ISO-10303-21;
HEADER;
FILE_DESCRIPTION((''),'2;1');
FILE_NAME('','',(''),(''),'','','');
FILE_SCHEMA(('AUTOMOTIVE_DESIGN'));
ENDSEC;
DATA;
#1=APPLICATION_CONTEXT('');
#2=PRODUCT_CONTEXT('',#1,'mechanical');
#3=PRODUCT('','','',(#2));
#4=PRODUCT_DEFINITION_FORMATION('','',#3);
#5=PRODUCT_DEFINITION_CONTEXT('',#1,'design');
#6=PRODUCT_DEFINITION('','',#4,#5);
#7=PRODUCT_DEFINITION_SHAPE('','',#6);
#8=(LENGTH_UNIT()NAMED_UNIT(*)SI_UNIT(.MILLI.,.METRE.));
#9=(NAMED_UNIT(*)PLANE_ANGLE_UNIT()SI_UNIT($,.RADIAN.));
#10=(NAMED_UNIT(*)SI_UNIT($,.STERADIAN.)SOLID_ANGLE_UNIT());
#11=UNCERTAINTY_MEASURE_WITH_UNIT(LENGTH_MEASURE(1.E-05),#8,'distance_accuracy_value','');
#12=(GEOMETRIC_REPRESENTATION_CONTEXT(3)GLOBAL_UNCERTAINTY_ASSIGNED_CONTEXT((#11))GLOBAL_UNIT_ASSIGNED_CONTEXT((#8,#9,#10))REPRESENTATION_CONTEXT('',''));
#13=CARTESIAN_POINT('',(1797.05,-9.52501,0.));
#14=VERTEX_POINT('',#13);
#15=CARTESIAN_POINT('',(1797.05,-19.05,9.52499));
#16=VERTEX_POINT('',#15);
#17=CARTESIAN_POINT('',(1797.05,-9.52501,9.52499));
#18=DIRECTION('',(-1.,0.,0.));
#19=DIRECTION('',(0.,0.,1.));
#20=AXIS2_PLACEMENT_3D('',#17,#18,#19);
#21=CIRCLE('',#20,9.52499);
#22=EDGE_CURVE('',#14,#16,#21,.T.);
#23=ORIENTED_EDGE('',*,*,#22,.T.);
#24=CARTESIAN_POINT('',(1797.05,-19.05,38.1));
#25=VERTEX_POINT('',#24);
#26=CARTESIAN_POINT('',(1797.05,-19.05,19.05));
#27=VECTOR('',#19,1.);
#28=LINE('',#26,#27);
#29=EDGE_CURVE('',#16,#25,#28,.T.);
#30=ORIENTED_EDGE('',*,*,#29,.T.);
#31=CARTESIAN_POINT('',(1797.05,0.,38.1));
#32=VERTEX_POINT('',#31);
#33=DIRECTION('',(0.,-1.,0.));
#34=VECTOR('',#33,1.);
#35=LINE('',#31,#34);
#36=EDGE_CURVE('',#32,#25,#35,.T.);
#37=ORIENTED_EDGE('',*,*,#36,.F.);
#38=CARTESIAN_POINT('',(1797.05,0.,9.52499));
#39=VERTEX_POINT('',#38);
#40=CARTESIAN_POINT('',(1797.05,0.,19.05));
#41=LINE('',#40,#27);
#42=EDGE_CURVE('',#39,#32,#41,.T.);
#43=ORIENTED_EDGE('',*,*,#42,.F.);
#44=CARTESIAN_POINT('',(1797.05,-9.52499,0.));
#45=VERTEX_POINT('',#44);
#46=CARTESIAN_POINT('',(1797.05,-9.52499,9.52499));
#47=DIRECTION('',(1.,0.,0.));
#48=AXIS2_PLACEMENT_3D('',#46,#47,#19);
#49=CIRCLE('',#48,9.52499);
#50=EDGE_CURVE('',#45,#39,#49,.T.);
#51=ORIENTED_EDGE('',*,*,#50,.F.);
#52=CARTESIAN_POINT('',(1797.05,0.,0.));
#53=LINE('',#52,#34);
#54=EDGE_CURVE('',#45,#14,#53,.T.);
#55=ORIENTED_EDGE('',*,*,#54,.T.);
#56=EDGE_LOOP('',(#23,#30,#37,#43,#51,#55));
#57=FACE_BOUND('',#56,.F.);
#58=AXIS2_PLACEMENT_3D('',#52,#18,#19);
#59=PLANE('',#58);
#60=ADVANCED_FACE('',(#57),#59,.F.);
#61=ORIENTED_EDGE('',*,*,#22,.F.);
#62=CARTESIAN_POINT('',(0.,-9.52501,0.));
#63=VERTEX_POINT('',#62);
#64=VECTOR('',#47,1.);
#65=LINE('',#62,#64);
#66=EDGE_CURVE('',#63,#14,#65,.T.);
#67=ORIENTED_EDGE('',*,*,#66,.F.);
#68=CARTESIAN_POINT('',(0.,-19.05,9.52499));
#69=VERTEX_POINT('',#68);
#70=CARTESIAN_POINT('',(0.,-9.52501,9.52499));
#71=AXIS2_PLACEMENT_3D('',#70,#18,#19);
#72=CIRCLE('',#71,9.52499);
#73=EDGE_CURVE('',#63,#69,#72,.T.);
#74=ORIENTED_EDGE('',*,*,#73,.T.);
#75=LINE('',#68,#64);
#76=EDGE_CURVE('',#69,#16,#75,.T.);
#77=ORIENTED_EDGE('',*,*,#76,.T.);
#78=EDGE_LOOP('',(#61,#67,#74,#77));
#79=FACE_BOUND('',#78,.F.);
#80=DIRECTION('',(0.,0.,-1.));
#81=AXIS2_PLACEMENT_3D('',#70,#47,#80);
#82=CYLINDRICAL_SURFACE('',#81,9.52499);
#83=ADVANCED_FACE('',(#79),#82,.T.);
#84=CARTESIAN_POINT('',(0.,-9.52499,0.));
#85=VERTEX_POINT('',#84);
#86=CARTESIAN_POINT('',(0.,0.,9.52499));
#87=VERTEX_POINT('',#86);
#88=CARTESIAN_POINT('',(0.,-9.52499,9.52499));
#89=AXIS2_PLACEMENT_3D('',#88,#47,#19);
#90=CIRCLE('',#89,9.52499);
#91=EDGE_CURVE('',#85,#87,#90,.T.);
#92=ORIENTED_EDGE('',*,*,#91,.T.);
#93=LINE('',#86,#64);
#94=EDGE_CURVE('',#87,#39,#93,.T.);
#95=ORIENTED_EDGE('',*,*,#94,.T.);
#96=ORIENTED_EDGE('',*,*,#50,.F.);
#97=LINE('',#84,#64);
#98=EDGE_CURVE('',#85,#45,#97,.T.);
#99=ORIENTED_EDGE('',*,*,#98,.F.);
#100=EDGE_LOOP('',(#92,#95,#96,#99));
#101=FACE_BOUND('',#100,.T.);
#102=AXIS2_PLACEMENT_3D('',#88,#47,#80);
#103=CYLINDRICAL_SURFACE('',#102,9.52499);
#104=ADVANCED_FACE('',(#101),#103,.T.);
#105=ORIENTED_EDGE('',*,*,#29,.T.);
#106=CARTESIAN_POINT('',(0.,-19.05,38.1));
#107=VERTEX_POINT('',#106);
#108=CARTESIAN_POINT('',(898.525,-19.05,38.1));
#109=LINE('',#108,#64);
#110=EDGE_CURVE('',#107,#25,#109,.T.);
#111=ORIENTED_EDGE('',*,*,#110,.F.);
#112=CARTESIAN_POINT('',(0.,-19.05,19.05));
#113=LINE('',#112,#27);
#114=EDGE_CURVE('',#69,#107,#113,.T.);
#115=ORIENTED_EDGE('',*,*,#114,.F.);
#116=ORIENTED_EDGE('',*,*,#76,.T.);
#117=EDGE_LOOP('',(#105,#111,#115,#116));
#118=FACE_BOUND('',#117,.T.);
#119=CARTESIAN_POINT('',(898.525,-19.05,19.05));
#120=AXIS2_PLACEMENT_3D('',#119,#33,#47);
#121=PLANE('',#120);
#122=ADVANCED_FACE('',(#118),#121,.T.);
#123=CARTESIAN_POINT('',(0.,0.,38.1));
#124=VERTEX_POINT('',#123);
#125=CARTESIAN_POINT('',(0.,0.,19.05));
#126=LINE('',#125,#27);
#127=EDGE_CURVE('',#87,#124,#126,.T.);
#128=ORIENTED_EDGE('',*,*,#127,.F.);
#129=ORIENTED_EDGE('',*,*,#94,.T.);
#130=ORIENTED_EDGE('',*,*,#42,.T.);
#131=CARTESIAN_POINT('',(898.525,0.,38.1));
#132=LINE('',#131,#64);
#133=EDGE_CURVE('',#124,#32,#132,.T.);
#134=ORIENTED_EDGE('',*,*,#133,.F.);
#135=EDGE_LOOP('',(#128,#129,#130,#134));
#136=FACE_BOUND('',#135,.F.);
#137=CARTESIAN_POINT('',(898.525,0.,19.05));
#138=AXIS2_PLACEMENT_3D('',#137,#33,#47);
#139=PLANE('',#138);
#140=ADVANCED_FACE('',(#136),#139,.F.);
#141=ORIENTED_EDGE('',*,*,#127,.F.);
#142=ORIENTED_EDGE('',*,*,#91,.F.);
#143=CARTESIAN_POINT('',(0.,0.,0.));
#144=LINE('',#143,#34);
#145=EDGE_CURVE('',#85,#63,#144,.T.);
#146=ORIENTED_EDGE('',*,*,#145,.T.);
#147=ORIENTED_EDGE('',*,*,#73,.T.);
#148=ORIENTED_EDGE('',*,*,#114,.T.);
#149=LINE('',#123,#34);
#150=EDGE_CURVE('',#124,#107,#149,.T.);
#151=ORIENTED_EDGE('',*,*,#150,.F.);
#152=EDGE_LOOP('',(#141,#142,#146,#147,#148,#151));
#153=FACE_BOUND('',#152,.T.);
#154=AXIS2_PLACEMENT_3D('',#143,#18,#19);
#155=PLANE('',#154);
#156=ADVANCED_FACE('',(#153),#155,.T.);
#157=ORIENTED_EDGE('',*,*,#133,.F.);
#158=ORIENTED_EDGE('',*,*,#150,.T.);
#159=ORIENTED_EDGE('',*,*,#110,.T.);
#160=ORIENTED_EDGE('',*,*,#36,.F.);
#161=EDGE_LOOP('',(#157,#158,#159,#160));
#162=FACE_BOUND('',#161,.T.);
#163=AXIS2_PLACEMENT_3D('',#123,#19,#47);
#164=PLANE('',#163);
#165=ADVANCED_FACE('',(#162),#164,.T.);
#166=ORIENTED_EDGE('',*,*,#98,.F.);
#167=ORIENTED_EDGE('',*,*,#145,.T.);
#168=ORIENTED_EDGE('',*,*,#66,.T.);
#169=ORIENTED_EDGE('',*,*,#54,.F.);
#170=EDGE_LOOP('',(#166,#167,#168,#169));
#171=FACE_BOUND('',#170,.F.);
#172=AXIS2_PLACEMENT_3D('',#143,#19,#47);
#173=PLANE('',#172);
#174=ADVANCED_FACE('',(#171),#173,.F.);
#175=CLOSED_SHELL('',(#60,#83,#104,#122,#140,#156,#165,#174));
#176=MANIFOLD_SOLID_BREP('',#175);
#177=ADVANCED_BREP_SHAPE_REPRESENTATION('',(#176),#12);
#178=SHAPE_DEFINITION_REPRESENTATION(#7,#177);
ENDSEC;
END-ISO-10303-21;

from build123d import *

# Parameters (mm, degrees)
F0_W     = 1797.05
F0_H     = 38.1
F1_DEPTH = 19.05
F2_R     = 9.52499


# Not quite as in the source:
# - a fillet or chamfer is up to 0.001 mm smaller than in the source, because OpenCascade refuses the exact size


with BuildPart() as f1:
    # F0 (on Front) → F1 (new body)
    with BuildSketch(Plane.XZ):
        with Locations((898.525, 19.05)):
            Rectangle(F0_W, F0_H)
    extrude(amount=F1_DEPTH)

    # F2 (radius 9.525 in the source; OpenCascade refuses exactly that, so slightly less here)
    f2_edges = [f1.edges().sort_by_distance(p)[0] for p in [
        (898.525, -19.05, 0),
        (898.525, 0, 0),
    ]]
    fillet(f2_edges, radius=F2_R)


solid = f1.part
